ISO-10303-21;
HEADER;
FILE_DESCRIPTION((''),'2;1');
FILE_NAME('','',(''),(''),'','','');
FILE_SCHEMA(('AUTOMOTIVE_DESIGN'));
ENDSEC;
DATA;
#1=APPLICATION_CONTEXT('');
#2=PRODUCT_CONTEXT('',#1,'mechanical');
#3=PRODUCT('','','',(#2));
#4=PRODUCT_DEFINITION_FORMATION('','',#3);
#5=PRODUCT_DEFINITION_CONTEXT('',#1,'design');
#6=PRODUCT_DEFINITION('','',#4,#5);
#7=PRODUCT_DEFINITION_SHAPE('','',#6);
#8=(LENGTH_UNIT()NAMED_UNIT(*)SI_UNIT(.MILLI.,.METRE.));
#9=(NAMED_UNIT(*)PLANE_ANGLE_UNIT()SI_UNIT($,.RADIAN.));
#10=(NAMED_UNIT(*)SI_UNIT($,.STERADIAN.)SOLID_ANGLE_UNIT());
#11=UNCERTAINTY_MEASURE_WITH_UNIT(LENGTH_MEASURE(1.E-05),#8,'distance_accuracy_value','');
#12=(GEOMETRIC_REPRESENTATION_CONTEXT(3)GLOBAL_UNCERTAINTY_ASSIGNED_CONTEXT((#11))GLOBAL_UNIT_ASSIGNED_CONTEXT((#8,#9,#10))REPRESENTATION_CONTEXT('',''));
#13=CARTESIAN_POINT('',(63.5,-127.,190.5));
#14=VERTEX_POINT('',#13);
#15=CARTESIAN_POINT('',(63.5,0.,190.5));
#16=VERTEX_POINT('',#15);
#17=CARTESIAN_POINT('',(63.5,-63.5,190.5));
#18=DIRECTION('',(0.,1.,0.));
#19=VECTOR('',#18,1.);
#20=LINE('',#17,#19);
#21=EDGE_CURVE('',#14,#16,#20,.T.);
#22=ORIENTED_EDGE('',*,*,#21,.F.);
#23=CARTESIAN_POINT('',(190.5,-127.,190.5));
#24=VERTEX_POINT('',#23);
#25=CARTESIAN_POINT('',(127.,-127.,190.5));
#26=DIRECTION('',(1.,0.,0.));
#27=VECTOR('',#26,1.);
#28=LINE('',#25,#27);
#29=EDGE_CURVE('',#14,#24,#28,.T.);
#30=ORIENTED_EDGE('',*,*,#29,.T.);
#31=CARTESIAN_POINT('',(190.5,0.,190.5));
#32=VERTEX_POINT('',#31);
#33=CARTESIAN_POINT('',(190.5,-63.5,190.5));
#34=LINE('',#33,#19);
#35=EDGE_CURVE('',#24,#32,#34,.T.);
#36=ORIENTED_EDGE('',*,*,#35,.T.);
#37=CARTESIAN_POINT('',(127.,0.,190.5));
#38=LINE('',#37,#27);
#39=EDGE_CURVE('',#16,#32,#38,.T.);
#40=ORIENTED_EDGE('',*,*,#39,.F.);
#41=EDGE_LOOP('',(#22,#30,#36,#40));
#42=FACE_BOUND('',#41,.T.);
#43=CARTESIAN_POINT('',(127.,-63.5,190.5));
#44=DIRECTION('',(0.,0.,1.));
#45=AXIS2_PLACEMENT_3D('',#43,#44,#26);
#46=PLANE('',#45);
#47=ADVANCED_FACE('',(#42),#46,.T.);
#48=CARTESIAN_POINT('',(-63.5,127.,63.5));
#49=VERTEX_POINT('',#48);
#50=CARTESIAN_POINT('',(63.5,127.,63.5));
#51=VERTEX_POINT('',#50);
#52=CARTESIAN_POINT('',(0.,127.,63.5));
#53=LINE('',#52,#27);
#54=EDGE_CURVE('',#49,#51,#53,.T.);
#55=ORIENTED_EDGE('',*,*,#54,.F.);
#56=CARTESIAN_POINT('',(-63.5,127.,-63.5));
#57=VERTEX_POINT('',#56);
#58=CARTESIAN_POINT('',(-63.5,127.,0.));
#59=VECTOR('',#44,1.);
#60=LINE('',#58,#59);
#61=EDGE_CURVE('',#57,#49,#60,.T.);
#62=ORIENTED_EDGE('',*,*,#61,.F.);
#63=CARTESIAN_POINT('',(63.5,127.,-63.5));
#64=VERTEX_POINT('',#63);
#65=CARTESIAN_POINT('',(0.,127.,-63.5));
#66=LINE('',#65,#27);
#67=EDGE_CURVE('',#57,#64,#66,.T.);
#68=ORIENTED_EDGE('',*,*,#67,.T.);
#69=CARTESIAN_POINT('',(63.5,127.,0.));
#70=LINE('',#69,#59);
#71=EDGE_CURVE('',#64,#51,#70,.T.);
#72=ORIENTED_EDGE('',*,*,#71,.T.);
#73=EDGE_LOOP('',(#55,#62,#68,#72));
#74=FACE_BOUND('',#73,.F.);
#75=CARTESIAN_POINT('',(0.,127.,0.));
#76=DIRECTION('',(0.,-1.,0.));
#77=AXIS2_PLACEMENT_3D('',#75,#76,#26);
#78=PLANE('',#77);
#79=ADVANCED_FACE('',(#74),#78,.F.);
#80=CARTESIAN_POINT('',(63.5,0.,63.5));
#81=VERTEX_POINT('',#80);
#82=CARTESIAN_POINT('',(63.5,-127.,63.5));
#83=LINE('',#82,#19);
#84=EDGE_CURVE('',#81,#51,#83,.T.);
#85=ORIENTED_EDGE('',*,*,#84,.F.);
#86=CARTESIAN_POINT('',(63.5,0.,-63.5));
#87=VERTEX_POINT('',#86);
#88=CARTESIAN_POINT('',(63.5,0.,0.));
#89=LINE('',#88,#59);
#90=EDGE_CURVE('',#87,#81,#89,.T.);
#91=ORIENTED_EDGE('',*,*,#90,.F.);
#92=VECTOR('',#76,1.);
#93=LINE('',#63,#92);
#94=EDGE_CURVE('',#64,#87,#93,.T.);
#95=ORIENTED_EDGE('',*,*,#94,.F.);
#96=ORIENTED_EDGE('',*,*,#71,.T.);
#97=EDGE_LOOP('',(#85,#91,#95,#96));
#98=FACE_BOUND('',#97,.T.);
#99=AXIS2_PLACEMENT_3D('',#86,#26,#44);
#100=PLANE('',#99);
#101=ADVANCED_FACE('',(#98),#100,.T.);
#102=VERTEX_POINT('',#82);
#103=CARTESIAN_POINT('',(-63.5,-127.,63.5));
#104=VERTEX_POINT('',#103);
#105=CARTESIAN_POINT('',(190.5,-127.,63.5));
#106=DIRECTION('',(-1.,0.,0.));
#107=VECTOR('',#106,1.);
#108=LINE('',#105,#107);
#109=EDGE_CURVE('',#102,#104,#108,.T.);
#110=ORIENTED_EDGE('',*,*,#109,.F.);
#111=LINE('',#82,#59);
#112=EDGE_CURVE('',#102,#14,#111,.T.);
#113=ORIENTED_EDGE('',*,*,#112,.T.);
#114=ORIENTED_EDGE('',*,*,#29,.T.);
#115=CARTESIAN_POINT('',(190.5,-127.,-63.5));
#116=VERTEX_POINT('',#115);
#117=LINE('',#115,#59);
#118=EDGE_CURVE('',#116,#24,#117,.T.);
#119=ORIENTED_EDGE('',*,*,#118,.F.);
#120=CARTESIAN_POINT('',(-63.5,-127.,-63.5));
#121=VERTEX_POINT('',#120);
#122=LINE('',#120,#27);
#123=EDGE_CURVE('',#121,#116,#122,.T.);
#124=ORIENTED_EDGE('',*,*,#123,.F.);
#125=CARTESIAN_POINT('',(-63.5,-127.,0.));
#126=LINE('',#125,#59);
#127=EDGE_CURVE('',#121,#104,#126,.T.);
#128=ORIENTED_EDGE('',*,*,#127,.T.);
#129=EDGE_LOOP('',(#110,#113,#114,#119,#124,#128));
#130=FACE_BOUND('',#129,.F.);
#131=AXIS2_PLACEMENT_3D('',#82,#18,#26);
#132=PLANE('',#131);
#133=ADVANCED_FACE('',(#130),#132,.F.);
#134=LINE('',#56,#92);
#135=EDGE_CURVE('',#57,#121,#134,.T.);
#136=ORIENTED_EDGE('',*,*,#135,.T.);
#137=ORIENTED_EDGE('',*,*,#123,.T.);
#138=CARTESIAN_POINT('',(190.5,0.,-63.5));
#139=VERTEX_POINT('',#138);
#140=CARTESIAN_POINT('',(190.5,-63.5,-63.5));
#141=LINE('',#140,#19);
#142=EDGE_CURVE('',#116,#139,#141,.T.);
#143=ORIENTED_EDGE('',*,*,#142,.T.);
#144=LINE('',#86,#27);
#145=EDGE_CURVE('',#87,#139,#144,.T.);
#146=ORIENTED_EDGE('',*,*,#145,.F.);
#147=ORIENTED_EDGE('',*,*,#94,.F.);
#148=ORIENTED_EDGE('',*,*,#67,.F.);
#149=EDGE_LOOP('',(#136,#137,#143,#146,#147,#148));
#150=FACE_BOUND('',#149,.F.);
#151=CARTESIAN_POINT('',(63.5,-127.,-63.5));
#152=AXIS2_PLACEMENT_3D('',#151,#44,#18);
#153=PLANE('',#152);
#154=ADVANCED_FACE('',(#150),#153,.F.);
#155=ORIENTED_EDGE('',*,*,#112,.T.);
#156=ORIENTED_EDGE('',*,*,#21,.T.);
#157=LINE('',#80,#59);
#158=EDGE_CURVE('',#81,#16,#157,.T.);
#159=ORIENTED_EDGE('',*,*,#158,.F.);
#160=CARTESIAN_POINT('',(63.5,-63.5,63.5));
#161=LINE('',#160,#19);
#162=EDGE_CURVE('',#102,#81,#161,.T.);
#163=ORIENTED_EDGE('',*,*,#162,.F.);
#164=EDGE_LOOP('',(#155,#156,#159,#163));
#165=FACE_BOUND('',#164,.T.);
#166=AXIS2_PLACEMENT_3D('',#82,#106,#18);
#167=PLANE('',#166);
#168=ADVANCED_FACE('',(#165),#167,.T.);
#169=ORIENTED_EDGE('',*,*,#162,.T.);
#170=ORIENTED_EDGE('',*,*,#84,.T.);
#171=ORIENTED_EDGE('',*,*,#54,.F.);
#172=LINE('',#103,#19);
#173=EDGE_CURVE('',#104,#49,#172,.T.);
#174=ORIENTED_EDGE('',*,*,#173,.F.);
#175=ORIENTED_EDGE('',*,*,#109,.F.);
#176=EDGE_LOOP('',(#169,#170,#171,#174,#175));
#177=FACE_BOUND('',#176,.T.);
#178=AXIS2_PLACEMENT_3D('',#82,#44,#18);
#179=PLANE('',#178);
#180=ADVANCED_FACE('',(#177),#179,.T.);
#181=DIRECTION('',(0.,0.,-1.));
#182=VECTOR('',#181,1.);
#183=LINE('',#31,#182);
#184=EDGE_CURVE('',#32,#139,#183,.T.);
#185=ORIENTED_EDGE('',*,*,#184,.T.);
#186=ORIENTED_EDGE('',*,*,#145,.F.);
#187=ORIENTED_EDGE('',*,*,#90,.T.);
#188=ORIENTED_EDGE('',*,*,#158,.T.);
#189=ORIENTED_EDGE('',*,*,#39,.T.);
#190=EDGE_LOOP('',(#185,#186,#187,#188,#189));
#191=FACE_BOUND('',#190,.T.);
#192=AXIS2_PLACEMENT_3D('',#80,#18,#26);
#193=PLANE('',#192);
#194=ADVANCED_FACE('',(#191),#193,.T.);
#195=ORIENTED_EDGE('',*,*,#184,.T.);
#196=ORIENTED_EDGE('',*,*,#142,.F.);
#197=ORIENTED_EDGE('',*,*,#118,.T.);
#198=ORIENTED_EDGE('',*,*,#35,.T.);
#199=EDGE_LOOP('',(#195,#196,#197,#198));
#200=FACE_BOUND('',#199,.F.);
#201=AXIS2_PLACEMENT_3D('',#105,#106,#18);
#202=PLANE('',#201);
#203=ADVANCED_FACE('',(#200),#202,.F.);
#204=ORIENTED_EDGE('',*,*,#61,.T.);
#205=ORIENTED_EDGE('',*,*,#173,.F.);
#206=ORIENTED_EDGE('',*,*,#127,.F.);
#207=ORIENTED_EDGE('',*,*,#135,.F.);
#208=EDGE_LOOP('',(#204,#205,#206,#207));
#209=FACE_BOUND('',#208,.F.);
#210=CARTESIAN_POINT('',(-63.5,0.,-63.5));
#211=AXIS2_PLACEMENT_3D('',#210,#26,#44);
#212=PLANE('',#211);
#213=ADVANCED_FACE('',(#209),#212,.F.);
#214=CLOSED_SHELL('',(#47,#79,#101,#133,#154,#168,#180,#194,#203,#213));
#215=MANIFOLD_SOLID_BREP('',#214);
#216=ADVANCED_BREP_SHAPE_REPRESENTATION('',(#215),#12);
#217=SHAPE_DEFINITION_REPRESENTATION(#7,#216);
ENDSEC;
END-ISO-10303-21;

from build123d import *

# Parameters (mm, degrees)
F1_W     = 127
F1_H     = 127
F2_DEPTH = 127
F3_W     = 127
F3_H     = 127
F4_DEPTH = 127
F5_W     = 127
F5_H     = 127
F6_DEPTH = 127


# Not quite as in the source:
# - a variable given as a bare number and used for a length is read in inches; the dataset says mm whatever the document's units were


with BuildPart() as f2:
    # F1 (on Front) → F2 (new body, symmetric)
    with BuildSketch(Plane.XZ):
        Rectangle(F1_W, F1_H)
    extrude(amount=F2_DEPTH, both=True)

    # F3 (on face) → F4 (join)
    with BuildSketch(Plane.YZ.offset(63.5)):
        with Locations((-63.5, 0)):
            Rectangle(F3_W, F3_H)
    extrude(amount=F4_DEPTH)

    # F5 (on face) → F6 (join)
    with BuildSketch(Plane.XY.offset(63.5)):
        with Locations((127, -63.5)):
            Rectangle(F5_W, F5_H)
    extrude(amount=F6_DEPTH)


solid = f2.part
